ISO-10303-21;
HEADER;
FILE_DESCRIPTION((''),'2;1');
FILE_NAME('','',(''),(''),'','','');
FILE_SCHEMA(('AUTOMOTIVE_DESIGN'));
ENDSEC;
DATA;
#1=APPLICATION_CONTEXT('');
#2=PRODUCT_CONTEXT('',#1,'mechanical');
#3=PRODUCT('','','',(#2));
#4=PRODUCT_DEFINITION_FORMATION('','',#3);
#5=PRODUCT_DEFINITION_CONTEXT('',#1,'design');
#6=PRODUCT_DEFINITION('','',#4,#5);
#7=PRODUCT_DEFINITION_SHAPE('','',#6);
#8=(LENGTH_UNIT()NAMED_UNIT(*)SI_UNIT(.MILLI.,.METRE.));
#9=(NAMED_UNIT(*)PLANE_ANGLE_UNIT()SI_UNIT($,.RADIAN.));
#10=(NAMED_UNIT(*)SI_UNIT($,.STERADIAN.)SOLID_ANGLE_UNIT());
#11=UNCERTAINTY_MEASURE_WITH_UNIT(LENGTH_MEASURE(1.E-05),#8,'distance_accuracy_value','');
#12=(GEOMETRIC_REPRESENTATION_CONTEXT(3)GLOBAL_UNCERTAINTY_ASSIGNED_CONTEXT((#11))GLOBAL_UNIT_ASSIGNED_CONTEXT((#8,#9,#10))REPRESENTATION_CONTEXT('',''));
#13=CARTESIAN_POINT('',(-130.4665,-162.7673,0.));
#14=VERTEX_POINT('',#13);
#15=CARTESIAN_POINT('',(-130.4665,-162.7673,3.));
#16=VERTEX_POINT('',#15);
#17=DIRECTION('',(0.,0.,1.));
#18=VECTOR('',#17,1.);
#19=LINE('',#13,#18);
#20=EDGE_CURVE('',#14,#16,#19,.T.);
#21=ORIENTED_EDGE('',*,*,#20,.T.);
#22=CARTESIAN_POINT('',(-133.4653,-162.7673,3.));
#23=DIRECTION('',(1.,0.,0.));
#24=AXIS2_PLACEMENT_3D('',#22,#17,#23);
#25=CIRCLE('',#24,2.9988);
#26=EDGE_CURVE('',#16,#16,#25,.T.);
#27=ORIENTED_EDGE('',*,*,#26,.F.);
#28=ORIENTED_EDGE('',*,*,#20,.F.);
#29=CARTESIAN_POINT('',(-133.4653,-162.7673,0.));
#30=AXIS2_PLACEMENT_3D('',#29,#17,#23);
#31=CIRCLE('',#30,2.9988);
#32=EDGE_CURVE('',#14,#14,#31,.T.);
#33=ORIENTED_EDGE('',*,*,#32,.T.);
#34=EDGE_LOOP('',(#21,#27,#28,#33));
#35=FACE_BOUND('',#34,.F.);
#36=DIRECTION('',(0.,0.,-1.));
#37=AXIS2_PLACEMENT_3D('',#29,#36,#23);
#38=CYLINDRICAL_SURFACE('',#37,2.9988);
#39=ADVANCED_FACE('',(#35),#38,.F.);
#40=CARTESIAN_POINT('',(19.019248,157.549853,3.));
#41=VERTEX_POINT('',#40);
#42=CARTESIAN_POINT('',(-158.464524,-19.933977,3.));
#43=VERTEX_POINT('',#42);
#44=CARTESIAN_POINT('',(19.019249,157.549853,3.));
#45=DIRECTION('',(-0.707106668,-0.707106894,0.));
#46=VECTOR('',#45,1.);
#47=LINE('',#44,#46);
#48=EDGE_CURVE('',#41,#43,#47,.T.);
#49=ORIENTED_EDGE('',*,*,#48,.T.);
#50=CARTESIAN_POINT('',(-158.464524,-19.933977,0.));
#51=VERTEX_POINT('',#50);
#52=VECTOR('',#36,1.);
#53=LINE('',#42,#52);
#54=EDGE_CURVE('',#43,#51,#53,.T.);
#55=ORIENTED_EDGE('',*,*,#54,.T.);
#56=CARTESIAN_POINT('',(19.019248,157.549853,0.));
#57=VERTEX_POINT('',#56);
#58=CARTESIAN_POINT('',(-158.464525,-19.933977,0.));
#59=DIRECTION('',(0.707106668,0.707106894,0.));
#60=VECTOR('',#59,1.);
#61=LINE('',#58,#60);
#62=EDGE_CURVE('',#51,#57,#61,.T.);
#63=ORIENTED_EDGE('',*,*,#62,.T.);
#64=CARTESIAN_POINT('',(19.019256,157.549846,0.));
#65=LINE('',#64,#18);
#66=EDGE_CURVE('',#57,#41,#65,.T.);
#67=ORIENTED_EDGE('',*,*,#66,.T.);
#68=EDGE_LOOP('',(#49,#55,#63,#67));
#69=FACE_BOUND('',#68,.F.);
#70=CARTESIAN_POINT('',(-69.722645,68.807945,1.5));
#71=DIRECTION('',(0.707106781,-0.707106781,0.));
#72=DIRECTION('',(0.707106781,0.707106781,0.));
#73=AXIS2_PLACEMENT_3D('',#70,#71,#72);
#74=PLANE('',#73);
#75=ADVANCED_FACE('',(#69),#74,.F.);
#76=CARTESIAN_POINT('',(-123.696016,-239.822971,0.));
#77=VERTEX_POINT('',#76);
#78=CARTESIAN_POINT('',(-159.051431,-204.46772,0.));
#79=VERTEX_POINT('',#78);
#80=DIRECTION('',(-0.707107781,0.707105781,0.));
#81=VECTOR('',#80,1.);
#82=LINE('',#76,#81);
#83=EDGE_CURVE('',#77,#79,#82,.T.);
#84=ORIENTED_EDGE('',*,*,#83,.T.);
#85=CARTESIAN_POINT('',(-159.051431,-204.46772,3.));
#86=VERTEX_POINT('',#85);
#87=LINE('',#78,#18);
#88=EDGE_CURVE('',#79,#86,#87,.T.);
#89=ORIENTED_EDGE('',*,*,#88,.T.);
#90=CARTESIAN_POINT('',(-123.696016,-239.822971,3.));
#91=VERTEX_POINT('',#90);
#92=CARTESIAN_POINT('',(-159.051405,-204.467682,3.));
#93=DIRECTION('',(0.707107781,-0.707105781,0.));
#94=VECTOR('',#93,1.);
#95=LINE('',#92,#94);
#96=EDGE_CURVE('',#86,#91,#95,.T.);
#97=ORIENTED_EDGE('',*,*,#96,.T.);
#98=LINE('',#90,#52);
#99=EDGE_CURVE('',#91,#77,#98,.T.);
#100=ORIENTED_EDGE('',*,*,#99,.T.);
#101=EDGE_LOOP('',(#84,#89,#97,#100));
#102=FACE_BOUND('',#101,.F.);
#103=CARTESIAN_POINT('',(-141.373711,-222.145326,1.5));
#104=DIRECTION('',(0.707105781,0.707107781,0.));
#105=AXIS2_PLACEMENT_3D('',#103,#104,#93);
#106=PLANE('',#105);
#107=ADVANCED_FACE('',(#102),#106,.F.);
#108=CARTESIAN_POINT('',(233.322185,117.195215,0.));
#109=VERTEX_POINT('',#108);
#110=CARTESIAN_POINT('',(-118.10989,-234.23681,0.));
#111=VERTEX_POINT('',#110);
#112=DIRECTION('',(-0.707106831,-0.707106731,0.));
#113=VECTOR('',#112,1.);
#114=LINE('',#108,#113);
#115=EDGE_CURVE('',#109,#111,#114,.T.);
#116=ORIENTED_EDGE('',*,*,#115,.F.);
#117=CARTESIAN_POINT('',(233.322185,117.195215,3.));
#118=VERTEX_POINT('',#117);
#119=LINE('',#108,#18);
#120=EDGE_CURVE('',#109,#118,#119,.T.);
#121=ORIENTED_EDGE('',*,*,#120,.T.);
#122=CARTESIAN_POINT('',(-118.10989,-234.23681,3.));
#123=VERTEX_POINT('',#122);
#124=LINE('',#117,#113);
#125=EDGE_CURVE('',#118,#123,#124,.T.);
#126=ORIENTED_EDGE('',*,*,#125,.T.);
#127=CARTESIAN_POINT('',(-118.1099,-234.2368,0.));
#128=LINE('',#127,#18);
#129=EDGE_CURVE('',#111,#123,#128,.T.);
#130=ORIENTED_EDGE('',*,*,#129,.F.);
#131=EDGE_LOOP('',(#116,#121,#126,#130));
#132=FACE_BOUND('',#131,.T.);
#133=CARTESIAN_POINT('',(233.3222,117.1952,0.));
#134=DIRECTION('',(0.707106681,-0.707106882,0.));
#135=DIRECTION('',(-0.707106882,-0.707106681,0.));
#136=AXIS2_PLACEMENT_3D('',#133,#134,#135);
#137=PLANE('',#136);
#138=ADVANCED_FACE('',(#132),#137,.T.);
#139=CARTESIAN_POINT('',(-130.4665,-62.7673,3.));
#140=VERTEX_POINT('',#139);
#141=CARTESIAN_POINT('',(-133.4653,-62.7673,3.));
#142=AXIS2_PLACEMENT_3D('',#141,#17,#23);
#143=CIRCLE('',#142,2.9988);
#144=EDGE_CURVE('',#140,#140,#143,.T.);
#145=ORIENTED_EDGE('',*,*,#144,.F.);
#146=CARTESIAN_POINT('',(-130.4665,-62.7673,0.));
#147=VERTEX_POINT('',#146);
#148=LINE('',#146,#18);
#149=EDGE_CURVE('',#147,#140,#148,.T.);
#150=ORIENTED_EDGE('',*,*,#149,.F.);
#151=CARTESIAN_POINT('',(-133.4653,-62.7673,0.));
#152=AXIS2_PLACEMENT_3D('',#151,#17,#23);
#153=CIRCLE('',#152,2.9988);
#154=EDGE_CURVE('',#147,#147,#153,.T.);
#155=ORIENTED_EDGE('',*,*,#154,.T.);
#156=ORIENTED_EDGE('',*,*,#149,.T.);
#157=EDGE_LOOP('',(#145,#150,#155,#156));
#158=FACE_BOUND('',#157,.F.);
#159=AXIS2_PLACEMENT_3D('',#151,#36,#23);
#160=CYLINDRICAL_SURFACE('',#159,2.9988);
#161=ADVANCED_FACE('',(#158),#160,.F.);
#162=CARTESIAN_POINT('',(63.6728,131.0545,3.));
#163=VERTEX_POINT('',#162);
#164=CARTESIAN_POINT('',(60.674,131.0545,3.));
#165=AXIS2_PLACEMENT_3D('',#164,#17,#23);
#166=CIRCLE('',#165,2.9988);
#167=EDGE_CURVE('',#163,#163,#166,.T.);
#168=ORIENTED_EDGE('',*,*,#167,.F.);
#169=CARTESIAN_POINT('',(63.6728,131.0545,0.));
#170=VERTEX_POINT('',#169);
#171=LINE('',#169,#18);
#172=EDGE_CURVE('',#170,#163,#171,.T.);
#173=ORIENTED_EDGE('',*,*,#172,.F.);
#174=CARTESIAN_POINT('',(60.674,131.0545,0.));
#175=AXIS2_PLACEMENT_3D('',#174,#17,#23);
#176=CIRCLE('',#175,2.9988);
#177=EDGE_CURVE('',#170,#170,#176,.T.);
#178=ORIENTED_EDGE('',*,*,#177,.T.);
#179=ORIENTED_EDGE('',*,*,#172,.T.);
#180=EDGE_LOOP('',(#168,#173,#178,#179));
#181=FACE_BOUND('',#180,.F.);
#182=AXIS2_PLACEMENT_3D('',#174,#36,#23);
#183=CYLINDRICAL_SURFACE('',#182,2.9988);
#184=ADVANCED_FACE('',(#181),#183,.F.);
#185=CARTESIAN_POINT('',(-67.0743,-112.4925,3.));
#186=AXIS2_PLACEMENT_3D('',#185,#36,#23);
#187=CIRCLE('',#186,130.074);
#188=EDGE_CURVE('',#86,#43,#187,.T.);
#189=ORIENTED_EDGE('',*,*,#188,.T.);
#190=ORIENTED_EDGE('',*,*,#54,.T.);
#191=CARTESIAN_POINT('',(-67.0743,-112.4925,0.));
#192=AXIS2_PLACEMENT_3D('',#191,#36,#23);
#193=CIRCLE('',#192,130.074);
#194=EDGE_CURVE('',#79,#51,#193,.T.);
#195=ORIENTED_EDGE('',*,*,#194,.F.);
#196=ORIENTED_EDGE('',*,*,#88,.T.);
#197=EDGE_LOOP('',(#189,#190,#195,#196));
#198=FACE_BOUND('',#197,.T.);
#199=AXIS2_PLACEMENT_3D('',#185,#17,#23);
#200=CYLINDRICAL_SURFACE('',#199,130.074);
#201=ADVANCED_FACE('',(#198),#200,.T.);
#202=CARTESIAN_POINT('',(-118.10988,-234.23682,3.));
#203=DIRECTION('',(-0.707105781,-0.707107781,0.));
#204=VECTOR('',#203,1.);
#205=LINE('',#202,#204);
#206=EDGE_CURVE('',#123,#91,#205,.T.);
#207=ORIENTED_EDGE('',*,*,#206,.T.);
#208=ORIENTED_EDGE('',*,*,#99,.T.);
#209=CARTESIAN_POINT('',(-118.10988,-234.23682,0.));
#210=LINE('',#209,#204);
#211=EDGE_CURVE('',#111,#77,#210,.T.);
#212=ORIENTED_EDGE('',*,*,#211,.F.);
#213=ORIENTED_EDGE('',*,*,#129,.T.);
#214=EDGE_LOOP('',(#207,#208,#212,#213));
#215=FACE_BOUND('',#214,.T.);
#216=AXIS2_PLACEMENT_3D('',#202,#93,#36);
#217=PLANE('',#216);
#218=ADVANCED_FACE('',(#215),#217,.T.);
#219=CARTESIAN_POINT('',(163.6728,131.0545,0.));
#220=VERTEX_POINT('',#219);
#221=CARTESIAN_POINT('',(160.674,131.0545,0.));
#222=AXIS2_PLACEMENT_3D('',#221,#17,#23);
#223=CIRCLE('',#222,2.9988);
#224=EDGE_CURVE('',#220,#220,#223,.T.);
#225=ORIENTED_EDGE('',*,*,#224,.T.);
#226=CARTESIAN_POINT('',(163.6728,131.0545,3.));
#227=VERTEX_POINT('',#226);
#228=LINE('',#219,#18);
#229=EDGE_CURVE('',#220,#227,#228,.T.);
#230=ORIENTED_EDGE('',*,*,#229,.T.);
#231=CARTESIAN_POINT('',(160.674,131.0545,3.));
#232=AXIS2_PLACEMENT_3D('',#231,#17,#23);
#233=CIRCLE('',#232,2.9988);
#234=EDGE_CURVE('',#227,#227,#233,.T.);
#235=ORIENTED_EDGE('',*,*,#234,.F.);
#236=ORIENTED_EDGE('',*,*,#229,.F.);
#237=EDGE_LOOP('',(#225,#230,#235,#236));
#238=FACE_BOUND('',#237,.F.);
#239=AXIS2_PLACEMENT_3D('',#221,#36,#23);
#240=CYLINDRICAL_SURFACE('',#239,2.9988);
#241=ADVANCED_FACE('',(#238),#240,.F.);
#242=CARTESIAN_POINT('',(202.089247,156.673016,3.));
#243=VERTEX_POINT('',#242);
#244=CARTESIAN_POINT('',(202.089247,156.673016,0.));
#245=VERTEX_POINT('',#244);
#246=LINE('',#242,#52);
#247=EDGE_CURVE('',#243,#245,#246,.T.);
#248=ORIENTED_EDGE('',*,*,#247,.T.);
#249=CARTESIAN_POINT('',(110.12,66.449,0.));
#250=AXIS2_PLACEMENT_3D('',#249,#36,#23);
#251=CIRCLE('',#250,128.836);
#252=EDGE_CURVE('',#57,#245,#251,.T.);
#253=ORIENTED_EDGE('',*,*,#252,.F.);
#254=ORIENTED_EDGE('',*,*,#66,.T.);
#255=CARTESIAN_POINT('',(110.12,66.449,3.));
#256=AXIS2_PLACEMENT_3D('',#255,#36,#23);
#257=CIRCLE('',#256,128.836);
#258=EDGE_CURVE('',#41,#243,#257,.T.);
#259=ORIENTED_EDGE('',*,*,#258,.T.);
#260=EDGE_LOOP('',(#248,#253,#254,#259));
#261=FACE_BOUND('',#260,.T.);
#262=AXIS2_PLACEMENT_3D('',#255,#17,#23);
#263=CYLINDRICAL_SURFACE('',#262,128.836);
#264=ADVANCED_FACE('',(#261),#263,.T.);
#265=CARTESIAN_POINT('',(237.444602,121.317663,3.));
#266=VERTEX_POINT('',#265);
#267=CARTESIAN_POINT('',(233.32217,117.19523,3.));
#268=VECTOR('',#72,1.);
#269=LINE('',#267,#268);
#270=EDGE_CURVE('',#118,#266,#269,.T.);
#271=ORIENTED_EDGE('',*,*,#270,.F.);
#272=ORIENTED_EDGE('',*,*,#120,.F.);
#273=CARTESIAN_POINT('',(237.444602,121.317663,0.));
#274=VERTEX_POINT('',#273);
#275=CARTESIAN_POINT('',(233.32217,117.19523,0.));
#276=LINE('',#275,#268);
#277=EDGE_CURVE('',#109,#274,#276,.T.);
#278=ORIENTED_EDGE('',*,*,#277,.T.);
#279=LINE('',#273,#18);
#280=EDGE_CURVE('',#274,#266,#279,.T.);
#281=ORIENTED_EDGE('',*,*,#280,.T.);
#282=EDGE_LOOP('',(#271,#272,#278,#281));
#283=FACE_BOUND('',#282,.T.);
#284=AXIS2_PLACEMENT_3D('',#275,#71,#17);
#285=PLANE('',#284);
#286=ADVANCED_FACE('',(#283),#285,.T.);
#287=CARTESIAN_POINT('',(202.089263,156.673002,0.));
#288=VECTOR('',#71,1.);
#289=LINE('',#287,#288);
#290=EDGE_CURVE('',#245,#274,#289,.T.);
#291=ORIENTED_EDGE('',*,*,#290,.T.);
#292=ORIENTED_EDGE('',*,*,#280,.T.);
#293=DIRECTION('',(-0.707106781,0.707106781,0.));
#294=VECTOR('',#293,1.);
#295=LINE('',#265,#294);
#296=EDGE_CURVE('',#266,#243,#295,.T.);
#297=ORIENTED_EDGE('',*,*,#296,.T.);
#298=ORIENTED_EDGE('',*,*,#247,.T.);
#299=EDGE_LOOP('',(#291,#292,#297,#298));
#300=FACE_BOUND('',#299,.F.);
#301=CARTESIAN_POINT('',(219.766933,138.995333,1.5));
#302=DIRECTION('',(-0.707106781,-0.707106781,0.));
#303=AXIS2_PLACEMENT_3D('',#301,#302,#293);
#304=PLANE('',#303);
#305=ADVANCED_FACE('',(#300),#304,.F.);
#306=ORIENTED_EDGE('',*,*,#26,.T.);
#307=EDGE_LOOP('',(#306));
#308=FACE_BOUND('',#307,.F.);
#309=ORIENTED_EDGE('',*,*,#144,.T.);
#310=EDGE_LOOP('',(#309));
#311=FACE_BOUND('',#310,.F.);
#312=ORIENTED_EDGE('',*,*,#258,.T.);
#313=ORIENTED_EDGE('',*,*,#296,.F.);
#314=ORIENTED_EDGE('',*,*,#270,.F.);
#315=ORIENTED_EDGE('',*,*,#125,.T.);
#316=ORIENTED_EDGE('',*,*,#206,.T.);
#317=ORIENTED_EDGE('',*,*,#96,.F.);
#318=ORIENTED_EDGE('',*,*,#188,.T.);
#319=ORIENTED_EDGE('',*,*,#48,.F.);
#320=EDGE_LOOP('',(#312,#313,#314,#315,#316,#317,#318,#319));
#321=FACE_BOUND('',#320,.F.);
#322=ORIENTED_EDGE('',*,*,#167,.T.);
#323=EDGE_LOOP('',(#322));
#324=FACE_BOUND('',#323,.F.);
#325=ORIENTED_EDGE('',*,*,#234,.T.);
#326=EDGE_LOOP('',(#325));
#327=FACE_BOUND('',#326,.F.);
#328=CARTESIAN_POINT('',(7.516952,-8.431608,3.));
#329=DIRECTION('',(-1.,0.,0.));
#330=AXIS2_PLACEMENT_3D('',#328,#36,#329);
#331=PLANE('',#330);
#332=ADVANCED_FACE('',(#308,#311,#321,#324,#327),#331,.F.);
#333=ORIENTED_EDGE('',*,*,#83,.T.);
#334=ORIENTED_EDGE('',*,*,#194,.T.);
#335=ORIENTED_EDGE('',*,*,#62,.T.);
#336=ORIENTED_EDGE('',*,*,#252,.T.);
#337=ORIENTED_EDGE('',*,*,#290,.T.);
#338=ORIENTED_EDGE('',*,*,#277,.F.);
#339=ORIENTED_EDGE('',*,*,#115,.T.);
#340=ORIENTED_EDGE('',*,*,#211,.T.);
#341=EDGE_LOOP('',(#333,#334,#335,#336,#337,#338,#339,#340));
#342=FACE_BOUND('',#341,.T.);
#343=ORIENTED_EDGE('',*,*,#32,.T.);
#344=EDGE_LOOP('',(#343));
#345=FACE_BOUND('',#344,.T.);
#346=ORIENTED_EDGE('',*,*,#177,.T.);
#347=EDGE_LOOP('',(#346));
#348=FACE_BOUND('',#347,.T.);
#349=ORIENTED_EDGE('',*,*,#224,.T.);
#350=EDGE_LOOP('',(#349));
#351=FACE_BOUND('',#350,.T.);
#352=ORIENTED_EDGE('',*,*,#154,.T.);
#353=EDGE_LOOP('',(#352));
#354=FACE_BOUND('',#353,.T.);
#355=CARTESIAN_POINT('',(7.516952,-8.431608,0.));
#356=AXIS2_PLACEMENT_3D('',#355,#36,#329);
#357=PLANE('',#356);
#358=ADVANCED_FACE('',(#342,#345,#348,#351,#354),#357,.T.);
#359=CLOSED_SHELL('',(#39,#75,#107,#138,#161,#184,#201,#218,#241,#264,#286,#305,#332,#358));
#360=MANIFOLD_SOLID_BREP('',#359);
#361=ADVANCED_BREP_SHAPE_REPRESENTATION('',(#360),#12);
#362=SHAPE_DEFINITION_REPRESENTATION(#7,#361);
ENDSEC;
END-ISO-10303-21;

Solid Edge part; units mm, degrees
sketch "Sketch1" plane through (0, 0, 0) normal (0, 0, 1) x (1, 0, 0)
  line L0 (233.3222, 117.1952) -> (-118.1099, -234.2368)
  line L1 (-118.1099, -234.2368) -> (-153.4653, -198.8815)
  line L2 (-153.4653, -198.8815) -> (-153.4653, -24.9332)
  line L3 (-153.4653, -24.9332) -> (24.0185, 152.5506)
  line L4 (24.0185, 152.5506) -> (197.9668, 152.5506)
  line L5 (197.9668, 152.5506) -> (233.3222, 117.1952)
  circle A0 centre (-133.4653, -62.7673) radius 2.9988
  circle A1 centre (-133.4653, -162.7673) radius 2.9988
  circle A2 centre (60.674, 131.0545) radius 2.9988
  circle A3 centre (160.674, 131.0545) radius 2.9988
  dimension "D1" = 497
  dimension "D2" = 50
  dimension "D3" = 173
  dimension "D4" = 5.9975
  dimension "D5" = 100
  dimension "D6" = 20
  dimension "D7" = 100
  dimension "D8" = 274.33
  dimension "D9" = 41.57
  dimension "D10" = 11.17
extrude "Protrusion1" add sketch "Sketch1" along normal blind 3
sketch "Sketch2" plane through (215.6445, 134.8729, 1.5) normal (0.7071068, 0.7071068, 0) x (0.7071068, -0.7071068, 0)
  line L0 (-25, 1.5) -> (25, 1.5)
  line L1 (25, 1.5) -> (25, -1.5)
  line L2 (25, -1.5) -> (-25, -1.5)
  line L3 (-25, -1.5) -> (-25, 1.5)
extrude "Extrusionsausprägung_2" add sketch "Sketch2" along normal blind 5.83
sketch "Sketch3" plane through (-135.7876, -216.5592, 1.5) normal (-0.7071068, -0.7071068, 0) x (0.7071068, -0.7071068, 0)
  line L0 (-25, 1.5) -> (25, 1.5)
  line L1 (25, 1.5) -> (25, -1.5)
  line L2 (25, -1.5) -> (-25, -1.5)
  line L3 (-25, -1.5) -> (-25, 1.5)
extrude "Extrusionsausprägung_3" add sketch "Sketch3" along normal blind 7.9
sketch "Sketch4" plane through (-64.7234, 63.8087, 1.5) normal (-0.7071068, 0.7071068, 0) x (-0.7071068, -0.7071068, 0)
  line L0 (-125.5, 1.5) -> (125.5, 1.5)
  line L1 (125.5, 1.5) -> (125.5, -1.5)
  line L2 (125.5, -1.5) -> (-125.5, -1.5)
  line L3 (-125.5, -1.5) -> (-125.5, 1.5)
extrude "Extrusionsausprägung_4" add sketch "Sketch4" along normal blind 7.07
sketch "Sketch5" plane through (39.1294, -41.2038, 3) normal (0, 0, 1) x (1, 0, 0)
  line L0 (-197.5939, 21.2698) -> (-192.5947, 16.2705)
  line L1 (-192.5947, 16.2705) -> (-192.5947, -157.6777)
  line L2 (-192.5947, -157.6777) -> (-198.1808, -163.2639)
  arc A0 (-198.1808, -163.2639) -> (-197.5939, 21.2698) centre (-106.2037, -71.2887) cw
extrude "Protrusion2" add sketch "Sketch5" against normal up to vertex (3 mm away)
sketch "Sketch6" plane through (20.0805, -41.2038, 3) normal (0, 0, 1) x (1, 0, 0)
  line L0 (-1.0612, 198.7536) -> (3.938, 193.7543)
  line L1 (3.938, 193.7543) -> (177.8863, 193.7543)
  line L2 (177.8863, 193.7543) -> (182.0087, 197.8768)
  arc A0 (-1.0612, 198.7536) -> (182.0087, 197.8768) centre (90.0395, 107.6528) cw
extrude "Protrusion3" add sketch "Sketch6" against normal up to vertex (3 mm away)
properties material "Nylon, allgemein"
